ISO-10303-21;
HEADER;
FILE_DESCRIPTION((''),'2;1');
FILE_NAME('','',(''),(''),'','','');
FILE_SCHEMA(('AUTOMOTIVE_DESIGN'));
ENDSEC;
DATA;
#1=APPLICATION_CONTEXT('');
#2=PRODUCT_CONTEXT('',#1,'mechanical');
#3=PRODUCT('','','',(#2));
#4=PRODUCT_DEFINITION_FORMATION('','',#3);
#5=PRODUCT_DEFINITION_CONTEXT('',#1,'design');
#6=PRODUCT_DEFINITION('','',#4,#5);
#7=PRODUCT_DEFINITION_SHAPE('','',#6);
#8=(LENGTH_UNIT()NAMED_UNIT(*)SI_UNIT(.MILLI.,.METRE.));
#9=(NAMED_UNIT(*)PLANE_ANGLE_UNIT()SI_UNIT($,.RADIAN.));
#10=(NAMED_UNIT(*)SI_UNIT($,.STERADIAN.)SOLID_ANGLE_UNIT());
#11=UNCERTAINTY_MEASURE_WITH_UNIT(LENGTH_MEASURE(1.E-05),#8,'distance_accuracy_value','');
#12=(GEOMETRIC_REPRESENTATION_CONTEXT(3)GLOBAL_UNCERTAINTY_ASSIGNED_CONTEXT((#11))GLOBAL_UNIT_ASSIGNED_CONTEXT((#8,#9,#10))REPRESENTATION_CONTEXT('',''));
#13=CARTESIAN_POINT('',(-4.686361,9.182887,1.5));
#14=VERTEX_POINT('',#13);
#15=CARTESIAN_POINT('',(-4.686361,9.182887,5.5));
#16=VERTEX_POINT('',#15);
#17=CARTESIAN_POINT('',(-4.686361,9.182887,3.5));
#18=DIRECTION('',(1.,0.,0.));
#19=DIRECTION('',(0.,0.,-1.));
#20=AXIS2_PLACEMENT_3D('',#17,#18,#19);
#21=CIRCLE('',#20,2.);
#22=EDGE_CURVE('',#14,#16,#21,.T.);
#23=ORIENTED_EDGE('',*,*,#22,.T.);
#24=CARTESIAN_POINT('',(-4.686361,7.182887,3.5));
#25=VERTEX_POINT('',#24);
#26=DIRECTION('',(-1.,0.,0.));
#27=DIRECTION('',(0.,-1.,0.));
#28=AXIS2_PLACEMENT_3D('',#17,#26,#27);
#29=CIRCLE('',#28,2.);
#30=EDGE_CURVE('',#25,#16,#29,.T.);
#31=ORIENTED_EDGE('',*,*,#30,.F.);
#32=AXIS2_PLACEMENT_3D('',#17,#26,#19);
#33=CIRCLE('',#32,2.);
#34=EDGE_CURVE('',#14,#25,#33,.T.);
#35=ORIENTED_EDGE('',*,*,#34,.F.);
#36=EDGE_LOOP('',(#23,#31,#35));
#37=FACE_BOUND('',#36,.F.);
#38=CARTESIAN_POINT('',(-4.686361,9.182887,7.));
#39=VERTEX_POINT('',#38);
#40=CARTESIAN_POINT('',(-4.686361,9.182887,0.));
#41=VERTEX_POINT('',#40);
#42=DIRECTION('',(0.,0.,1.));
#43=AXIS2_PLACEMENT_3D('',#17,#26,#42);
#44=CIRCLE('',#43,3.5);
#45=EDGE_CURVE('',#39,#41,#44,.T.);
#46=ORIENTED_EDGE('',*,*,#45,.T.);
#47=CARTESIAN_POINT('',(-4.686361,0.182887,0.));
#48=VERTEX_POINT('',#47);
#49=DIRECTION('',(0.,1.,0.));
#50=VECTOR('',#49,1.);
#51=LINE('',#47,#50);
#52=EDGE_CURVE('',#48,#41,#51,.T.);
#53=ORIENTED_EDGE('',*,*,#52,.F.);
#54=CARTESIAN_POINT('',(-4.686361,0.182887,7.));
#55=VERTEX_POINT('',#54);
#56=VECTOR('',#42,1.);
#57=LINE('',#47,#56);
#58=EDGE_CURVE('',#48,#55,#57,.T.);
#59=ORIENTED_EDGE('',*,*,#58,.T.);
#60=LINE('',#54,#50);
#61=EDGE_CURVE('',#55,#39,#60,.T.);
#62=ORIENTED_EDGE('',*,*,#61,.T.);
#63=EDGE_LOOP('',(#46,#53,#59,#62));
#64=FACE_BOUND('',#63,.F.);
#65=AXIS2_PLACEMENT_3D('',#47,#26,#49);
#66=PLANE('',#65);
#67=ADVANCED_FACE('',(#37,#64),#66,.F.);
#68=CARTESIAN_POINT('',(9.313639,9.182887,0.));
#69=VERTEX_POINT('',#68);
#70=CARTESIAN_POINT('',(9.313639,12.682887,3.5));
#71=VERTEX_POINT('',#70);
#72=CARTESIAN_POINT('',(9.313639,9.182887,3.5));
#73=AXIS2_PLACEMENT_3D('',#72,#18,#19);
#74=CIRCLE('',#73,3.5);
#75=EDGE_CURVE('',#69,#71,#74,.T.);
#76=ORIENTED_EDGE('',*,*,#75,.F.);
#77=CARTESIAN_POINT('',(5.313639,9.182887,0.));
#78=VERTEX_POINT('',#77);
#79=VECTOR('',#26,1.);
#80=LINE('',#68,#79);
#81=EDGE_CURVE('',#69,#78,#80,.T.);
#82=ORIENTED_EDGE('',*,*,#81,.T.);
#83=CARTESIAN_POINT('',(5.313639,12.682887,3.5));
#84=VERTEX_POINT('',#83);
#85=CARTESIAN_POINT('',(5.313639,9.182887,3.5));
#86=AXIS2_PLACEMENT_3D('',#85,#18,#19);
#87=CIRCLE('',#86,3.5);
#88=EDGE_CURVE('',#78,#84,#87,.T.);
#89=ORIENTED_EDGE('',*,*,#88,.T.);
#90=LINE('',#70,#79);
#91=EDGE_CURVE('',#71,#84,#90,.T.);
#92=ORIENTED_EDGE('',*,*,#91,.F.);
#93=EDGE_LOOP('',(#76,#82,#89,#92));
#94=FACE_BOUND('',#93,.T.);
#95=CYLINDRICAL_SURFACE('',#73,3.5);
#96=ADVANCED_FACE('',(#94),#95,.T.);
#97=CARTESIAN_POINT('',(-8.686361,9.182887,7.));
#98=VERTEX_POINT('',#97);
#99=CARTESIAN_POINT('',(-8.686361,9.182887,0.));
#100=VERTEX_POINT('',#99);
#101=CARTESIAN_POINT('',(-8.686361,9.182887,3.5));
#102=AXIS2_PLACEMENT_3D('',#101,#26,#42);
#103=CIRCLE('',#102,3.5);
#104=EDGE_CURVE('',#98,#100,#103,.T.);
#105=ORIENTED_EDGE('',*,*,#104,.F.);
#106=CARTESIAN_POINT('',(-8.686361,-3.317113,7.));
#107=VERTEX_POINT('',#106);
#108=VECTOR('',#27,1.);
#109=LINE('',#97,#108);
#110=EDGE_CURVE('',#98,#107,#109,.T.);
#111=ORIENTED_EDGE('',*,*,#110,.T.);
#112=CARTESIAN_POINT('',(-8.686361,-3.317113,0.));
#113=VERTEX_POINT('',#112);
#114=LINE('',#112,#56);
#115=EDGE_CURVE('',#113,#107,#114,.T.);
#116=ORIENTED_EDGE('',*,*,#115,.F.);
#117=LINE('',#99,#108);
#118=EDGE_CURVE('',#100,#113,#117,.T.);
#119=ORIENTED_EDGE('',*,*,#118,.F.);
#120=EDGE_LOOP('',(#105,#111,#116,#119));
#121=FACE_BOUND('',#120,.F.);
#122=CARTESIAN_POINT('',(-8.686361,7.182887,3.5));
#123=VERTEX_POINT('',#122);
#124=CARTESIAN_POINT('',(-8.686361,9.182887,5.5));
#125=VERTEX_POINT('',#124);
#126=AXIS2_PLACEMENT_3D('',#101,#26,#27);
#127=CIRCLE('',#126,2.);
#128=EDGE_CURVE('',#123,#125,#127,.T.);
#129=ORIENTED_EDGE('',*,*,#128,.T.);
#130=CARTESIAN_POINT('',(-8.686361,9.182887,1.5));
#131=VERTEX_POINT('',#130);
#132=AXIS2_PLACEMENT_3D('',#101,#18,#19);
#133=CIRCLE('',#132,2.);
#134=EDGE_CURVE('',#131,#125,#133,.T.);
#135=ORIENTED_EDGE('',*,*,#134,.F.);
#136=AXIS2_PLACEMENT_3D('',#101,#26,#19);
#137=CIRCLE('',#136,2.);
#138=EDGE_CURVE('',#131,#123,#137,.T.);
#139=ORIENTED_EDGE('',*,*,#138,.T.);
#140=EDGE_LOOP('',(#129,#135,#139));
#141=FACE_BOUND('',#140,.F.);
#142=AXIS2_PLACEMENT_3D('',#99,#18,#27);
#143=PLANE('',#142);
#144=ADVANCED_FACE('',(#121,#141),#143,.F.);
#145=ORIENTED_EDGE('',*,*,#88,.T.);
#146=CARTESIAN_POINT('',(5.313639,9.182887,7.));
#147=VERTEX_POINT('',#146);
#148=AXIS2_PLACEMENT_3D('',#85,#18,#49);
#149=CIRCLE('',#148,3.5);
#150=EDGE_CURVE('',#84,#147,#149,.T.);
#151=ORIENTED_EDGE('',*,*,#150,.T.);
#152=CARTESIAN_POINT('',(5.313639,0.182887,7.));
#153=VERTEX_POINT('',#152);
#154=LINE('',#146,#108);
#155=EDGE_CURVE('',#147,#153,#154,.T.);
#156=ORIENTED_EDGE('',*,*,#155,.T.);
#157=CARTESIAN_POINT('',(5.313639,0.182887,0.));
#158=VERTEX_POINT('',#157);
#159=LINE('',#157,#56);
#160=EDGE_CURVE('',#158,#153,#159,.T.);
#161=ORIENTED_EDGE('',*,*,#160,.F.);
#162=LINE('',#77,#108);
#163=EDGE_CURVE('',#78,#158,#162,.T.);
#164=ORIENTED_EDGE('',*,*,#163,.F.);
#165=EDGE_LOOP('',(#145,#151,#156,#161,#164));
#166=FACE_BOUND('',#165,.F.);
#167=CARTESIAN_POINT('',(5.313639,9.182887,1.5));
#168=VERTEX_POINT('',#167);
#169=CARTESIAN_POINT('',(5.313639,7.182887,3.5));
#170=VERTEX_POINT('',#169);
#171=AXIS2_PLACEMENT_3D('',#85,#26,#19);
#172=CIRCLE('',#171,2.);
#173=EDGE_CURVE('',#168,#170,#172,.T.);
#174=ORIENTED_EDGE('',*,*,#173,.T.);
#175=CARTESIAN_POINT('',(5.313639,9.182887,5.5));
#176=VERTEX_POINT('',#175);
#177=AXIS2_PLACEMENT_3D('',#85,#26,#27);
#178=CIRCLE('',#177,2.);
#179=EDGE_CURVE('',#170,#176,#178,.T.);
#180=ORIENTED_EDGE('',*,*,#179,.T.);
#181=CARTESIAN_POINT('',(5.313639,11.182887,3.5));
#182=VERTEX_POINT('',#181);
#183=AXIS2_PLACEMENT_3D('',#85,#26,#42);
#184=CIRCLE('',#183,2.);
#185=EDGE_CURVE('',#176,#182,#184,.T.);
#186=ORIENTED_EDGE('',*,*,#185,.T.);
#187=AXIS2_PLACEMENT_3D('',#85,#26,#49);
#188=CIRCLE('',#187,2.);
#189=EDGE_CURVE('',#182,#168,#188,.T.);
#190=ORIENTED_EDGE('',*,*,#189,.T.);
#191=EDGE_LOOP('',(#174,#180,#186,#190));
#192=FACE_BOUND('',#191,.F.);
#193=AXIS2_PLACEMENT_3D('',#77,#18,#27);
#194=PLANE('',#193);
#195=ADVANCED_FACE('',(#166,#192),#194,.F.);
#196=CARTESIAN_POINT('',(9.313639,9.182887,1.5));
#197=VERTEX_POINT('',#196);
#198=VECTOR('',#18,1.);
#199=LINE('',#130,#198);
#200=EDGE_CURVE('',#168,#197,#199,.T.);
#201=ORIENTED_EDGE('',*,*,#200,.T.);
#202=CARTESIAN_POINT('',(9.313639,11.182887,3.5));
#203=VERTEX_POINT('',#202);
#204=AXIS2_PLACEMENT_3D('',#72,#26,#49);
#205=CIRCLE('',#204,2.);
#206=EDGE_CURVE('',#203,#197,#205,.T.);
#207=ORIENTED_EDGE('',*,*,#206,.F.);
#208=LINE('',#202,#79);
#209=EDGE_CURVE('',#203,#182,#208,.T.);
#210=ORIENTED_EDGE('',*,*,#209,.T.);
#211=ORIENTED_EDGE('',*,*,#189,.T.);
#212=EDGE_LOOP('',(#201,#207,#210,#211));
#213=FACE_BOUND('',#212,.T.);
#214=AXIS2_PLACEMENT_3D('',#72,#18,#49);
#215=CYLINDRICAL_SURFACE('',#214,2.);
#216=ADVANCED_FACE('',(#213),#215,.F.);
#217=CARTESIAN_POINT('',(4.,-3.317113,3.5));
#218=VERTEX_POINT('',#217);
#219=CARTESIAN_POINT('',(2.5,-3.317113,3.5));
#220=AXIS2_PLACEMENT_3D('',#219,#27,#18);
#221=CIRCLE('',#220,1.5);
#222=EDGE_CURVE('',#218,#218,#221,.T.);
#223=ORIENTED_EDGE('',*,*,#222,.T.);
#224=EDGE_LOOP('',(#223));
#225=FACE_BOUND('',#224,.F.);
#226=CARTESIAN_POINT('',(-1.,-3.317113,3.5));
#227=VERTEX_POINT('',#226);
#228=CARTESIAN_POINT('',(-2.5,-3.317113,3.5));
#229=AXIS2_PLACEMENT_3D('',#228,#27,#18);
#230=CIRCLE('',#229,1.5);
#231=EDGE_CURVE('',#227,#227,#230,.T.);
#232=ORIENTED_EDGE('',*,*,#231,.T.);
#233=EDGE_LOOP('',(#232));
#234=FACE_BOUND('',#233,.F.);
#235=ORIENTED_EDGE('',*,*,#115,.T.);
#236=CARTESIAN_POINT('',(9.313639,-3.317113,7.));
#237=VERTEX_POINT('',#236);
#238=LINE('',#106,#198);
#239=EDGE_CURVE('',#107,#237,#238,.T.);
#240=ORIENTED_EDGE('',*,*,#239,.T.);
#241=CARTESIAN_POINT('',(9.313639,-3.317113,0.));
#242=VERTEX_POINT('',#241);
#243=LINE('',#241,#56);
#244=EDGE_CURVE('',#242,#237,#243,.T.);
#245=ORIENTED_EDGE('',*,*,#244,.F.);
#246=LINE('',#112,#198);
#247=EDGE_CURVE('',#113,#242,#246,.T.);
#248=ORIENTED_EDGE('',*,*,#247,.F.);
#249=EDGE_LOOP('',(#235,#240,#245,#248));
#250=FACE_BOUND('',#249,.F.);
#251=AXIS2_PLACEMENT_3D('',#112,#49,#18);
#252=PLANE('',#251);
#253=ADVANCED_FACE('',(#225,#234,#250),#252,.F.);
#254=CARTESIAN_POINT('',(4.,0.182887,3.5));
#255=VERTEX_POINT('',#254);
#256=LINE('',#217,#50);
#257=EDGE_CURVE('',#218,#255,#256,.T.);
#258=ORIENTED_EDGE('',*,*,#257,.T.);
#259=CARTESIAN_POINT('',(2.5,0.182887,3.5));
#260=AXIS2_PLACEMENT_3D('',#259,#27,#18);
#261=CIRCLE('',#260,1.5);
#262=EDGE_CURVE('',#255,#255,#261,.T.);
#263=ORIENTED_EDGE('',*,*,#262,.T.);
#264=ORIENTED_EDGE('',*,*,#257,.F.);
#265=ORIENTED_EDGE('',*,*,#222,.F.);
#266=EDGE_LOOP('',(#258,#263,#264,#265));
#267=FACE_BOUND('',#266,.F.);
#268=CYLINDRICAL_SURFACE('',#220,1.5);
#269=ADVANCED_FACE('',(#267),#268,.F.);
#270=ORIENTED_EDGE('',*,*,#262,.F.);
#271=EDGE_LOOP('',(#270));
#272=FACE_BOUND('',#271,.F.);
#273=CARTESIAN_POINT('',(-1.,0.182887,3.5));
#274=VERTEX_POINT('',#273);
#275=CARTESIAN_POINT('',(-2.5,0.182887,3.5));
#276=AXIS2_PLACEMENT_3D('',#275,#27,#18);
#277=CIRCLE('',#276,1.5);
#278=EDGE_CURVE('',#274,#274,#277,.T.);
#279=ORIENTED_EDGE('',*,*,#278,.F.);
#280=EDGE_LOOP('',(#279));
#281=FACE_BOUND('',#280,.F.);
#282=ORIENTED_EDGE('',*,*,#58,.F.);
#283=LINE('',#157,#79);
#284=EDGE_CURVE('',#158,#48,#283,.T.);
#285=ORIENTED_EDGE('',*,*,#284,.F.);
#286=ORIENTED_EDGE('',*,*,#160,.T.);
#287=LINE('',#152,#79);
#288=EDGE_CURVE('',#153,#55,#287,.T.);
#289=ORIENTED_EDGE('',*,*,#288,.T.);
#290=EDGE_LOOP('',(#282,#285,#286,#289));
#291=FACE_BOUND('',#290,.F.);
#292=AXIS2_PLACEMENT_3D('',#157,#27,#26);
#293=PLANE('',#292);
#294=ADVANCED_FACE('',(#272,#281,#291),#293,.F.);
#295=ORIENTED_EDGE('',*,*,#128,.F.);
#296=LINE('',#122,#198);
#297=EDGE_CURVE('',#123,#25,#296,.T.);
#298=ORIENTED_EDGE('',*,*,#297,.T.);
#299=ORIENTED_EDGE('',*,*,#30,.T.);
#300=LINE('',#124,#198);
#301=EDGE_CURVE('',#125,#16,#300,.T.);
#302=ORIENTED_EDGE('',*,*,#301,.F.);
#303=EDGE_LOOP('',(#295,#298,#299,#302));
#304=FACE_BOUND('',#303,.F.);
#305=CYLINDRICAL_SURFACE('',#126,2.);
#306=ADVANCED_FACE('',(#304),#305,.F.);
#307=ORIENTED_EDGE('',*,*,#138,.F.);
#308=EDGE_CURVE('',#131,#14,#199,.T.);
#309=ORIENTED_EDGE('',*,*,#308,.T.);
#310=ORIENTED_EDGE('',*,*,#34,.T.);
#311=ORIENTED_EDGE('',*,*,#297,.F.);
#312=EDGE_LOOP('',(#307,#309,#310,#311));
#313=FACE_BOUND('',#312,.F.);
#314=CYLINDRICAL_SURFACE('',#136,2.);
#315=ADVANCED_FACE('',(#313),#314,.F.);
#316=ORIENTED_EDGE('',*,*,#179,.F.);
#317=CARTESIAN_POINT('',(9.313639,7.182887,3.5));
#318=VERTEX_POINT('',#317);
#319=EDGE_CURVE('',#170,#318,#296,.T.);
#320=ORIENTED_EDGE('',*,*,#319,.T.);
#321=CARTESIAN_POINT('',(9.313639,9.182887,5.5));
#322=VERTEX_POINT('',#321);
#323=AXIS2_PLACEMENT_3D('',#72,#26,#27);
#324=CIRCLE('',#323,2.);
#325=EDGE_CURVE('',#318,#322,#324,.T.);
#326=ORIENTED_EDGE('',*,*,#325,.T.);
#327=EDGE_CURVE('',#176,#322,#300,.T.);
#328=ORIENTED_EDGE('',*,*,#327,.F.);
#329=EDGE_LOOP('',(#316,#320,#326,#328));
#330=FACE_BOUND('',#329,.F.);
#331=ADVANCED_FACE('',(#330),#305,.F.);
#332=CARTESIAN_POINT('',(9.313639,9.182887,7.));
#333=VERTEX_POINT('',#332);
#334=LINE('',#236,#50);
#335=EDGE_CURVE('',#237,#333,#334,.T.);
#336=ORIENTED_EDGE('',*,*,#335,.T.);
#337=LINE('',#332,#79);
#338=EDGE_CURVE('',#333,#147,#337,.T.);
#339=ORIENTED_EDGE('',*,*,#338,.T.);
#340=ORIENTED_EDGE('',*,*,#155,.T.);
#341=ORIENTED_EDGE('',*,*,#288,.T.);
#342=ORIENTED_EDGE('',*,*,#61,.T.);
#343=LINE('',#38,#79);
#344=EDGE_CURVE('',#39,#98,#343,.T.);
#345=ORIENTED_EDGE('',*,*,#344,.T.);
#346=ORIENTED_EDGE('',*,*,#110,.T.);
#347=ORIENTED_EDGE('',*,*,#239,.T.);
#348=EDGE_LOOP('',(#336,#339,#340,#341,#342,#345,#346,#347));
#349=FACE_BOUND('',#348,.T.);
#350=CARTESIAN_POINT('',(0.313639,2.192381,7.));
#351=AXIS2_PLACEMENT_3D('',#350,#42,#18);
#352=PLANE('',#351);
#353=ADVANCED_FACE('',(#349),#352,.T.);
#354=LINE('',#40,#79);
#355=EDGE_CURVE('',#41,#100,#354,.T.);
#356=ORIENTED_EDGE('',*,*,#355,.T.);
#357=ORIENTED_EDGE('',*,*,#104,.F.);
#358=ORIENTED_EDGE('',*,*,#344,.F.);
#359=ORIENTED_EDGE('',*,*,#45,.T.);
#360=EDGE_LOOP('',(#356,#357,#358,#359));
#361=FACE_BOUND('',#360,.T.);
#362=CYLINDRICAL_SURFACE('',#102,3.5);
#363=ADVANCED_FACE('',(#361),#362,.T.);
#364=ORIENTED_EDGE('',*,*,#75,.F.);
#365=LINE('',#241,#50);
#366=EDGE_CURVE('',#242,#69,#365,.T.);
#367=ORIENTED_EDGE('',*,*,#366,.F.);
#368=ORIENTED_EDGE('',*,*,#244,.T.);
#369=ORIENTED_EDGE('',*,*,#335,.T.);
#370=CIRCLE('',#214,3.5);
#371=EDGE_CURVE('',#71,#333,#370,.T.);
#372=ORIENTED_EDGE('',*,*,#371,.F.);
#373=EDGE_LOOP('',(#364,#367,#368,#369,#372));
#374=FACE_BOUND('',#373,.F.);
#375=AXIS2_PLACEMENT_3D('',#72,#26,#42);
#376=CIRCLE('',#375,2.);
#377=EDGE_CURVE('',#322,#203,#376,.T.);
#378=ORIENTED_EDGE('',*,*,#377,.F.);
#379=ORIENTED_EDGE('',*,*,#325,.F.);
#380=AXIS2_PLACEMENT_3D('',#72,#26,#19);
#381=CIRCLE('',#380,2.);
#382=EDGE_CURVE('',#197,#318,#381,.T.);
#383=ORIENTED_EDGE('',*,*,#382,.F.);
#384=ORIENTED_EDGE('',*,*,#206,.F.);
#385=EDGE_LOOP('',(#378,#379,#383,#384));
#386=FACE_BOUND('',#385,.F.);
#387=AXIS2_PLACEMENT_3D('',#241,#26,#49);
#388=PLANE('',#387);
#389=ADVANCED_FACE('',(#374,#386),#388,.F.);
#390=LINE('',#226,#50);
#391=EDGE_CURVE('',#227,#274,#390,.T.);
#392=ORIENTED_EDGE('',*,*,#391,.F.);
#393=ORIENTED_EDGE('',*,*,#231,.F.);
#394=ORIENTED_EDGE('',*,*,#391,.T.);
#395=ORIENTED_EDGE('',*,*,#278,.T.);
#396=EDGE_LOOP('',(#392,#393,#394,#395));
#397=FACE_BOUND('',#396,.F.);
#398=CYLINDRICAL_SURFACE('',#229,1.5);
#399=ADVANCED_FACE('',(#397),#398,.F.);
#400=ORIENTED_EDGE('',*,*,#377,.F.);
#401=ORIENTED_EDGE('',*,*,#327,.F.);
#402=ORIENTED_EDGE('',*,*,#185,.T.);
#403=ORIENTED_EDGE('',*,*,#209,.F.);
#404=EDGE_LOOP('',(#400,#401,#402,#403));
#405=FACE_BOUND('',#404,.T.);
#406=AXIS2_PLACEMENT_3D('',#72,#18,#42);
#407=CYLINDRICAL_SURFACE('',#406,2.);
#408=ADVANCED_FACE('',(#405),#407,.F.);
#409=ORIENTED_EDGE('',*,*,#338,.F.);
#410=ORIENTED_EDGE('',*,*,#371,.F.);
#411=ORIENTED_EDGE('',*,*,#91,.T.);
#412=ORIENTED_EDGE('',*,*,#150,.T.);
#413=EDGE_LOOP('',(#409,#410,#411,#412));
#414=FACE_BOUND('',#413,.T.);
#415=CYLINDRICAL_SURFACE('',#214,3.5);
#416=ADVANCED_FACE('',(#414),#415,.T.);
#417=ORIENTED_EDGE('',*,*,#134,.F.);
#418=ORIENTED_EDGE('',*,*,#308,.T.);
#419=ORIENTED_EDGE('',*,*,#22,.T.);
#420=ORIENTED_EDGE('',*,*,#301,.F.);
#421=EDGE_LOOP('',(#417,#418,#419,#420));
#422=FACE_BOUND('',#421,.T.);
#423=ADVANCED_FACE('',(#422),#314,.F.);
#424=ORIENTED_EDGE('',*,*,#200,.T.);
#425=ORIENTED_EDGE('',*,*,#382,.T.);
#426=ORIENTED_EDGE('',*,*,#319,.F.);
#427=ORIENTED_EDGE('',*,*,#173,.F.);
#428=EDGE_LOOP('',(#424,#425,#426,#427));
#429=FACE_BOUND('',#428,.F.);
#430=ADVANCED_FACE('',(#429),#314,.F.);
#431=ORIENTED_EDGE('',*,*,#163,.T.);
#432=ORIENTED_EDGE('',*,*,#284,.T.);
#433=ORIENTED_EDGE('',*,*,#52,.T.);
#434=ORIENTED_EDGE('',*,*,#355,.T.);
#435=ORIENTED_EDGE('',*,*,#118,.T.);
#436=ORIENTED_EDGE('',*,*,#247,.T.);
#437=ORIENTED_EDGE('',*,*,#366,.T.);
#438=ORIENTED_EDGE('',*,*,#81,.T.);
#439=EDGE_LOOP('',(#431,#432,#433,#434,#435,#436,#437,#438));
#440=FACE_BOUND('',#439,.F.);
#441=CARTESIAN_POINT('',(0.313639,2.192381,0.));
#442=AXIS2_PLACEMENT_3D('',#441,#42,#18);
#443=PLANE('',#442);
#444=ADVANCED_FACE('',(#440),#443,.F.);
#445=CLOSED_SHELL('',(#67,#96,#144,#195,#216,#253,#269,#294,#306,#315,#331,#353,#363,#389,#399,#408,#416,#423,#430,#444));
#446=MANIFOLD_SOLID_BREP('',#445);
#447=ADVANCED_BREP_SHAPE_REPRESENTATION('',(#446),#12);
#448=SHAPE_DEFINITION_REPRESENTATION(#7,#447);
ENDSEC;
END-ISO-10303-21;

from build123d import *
from build123d import SkipClean  # not in build123d's __all__

# Parameters (mm, degrees)
F1_DEPTH = 7
F3_DEPTH = 18
F4_DEPTH = 4
F6_DEPTH = 4
F7_R     = 1.5
F8_DEPTH = 3.5


with BuildPart() as f1:
    # F0 (on Top) → F1 (new body)
    with BuildSketch(Plane.XY):
        Polygon((-8.6863613641, -3.3171127737), (0.3136386359, -3.3171127737), (9.3136386359, -3.3171127737), (9.3136386359, 0.1828872263), (9.3136386359, 9.1828872263), (5.3136386359, 9.1828872263), (5.3136386359, 0.1828872263), (-4.6863613641, 0.1828872263), (-4.6863613641, 9.1828872263), (-8.6863613641, 9.1828872263), (-8.6863613641, 0.1828872263), align=None)
    extrude(amount=F1_DEPTH)

    # F2 (on face) → F3 (cut, through all)
    with BuildSketch(Plane(origin=(-8.6863613641, 0, 0), x_dir=(0, -1, 0), z_dir=(-1, 0, 0))):
        with BuildLine():
            Line((-9.1828872263, 5.5), (-9.1828872263, 1.5))
            ThreePointArc((-9.1828872263, 1.5), (-7.768673664, 2.0857864376), (-7.1828872263, 3.5))
            ThreePointArc((-7.1828872263, 3.5), (-7.768673664, 4.9142135624), (-9.1828872263, 5.5))
        make_face()
    extrude(amount=-F3_DEPTH, mode=Mode.SUBTRACT)

    # F2 (on face) → F4 (join, through all)
    with BuildSketch(Plane(origin=(-8.6863613641, 0, 0), x_dir=(0, -1, 0), z_dir=(-1, 0, 0))):
        with BuildLine():
            ThreePointArc((-9.1828872263, 7), (-12.6828872263, 3.5), (-9.1828872263, 0))
            Line((-9.1828872263, 0), (-9.1828872263, 1.5))
            ThreePointArc((-9.1828872263, 1.5), (-11.1828872263, 3.5), (-9.1828872263, 5.5))
            Line((-9.1828872263, 5.5), (-9.1828872263, 7))
        make_face()
    with SkipClean():  # cleaning this boolean's faces spoils the solid; the shape is the same uncleaned
        extrude(amount=-F4_DEPTH)

    # F5 (on face) → F6 (join, through all)
    with BuildSketch(Plane.YZ.offset(9.3136386359)):
        with BuildLine():
            ThreePointArc((9.1828872263, 1.5), (7.1828872263, 3.5), (9.1828872263, 5.5))
            Line((9.1828872263, 5.5), (9.1828872263, 7))
            ThreePointArc((9.1828872263, 7), (5.6828872263, 3.5), (9.1828872263, 0))
            Line((9.1828872263, 0), (9.1828872263, 1.5))
        make_face()
        with BuildLine():
            Line((9.1828872263, 7), (9.1828872263, 5.5))
            ThreePointArc((9.1828872263, 5.5), (10.5971007887, 4.9142135624), (11.1828872263, 3.5))
            ThreePointArc((11.1828872263, 3.5), (10.5971007887, 2.0857864376), (9.1828872263, 1.5))
            Line((9.1828872263, 1.5), (9.1828872263, 0))
            ThreePointArc((9.1828872263, 0), (11.6577609605, 1.0251262658), (12.6828872263, 3.5))
            ThreePointArc((12.6828872263, 3.5), (11.6577609605, 5.9748737342), (9.1828872263, 7))
        make_face()
        with BuildLine():
            ThreePointArc((9.1828872263, 0), (5.6828872263, 3.5), (9.1828872263, 7))
            Line((9.1828872263, 7), (-3.3171127737, 7))
            Line((-3.3171127737, 7), (-3.3171127737, 0))
            Line((-3.3171127737, 0), (9.1828872263, 0))
        make_face()
    extrude(amount=-F6_DEPTH)

    # F7 (on face) → F8 (cut, through all)
    with BuildSketch(Plane.XZ.offset(3.3171127737)):
        with Locations((-2.5, 3.5)):
            Circle(F7_R)
        with Locations((2.5, 3.5)):
            Circle(F7_R)
    extrude(amount=-F8_DEPTH, mode=Mode.SUBTRACT)


solid = f1.part
